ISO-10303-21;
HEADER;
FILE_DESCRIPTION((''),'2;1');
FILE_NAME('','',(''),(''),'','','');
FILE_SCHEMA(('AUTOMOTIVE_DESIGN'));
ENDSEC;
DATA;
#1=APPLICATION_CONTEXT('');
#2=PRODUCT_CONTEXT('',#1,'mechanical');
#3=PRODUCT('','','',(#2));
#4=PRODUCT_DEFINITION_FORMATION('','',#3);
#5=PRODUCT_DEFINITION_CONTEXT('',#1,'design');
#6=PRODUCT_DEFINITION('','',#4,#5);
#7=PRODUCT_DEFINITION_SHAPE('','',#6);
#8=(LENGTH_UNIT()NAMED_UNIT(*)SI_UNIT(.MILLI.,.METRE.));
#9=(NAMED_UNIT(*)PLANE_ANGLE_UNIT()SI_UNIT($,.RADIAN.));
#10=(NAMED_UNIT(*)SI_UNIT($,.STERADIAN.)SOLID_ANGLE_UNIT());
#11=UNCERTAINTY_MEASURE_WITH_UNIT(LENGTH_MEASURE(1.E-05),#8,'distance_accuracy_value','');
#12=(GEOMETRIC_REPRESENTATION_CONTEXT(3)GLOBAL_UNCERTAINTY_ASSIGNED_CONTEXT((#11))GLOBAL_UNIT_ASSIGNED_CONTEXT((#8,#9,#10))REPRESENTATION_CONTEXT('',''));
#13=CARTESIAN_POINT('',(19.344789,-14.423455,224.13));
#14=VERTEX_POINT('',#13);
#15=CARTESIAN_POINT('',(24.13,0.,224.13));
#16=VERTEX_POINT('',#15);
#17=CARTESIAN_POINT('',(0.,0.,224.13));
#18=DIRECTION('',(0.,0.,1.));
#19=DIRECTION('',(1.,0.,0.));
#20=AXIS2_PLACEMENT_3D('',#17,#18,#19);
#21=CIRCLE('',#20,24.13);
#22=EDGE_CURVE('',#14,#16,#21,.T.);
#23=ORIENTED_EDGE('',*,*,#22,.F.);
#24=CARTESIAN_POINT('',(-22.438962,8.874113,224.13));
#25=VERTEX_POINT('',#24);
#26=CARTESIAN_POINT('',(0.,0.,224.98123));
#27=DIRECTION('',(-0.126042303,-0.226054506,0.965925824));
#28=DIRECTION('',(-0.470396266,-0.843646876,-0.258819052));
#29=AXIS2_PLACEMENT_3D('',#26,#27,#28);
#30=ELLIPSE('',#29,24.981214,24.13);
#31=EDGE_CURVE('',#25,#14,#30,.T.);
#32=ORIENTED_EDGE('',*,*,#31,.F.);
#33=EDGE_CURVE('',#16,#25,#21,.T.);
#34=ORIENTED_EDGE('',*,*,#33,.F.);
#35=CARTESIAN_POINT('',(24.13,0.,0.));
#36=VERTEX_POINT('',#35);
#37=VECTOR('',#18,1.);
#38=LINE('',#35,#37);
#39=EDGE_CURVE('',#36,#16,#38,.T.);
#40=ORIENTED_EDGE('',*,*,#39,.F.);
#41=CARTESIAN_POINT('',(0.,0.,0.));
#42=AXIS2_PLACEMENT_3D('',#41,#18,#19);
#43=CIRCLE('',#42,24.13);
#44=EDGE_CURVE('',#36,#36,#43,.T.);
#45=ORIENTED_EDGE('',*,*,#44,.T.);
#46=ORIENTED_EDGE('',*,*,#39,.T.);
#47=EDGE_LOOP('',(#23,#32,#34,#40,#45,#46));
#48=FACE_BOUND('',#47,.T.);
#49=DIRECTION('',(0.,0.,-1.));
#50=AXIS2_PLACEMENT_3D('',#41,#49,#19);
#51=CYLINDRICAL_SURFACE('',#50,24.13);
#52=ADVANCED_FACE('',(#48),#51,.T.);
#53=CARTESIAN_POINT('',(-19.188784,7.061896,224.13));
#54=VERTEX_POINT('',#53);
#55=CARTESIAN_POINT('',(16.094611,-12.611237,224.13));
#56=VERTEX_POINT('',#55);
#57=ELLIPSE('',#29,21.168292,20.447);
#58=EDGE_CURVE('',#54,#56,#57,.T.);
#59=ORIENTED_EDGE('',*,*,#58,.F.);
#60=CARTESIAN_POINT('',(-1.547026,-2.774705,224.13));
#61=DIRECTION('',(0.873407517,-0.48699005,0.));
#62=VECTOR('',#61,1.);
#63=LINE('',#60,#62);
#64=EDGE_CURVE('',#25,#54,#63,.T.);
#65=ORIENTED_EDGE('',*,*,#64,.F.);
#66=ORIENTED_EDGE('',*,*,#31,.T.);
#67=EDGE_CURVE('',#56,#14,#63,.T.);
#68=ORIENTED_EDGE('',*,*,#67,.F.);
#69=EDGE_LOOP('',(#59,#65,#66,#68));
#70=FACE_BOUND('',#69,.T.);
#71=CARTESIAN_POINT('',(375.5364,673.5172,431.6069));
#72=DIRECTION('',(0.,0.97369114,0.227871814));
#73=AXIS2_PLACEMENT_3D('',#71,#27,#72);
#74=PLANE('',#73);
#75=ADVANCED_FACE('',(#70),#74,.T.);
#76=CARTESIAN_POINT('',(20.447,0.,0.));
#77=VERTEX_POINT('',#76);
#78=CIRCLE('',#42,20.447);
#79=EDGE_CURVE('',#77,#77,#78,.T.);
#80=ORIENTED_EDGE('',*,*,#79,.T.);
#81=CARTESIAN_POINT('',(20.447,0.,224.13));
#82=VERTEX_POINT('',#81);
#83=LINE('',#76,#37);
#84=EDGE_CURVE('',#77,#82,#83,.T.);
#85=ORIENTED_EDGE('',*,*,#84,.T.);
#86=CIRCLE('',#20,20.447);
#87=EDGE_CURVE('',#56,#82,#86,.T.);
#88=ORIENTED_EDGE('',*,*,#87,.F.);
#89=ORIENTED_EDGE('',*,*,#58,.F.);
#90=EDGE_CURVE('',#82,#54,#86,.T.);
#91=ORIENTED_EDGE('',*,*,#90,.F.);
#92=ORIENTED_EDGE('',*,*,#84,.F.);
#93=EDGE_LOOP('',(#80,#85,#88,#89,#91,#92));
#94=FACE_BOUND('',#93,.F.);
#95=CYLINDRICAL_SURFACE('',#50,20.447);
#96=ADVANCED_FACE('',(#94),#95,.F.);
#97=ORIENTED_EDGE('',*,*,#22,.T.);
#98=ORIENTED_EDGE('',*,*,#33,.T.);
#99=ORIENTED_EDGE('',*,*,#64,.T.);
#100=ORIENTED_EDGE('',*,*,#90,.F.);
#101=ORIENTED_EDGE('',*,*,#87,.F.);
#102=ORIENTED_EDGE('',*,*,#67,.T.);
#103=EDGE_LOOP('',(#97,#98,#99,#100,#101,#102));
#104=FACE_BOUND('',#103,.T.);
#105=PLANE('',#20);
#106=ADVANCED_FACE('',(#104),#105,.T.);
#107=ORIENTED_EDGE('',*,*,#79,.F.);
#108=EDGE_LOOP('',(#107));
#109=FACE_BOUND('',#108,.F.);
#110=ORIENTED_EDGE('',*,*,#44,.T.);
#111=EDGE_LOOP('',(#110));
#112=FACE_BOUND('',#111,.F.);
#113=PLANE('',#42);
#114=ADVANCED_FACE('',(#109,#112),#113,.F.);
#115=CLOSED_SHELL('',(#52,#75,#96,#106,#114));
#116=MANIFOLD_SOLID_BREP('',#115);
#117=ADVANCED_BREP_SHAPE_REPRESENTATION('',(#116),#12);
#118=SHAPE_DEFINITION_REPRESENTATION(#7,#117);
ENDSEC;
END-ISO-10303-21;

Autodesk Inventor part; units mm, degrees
ref_plane "Start Plane" through (0, 0, 0) normal (0, 0, 1) x (1, 0, 0)
ref_plane "End Plane" through (0, 0, 224.13) normal (0, 0, 1) x (1, 0, 0)
sketch "Sketch" plane through (0, 0, 0) normal (0, 0, 1) x (1, 0, 0)
  circle A0 centre (0, 0) radius 20.447
  circle A1 centre (0, 0) radius 24.13
  dimension "d0" = 48.26
  dimension "d1" = 3.683
extrude "Body" add sketch "Sketch" along normal up to surface (224.13 mm away) from surface at 0
sketch "Sketch3" plane through (0, 0, 0) normal (0, 0, 1) x (1, 0, 0)
  line L0 (0, 0) -> (10, 0)
ref_plane "Work Plane3" through (0, 0, 0) normal (0, -1, 0) x (1, 0, 0)
ref_plane "Work Plane4" through (375.5364, 673.5172, 431.6069) normal (-0.1260423, -0.2260545, 0.9659258) x (0.991919, -0.0144931, 0.1260423)
split "Split1" plane through (375.5364, 673.5172, 431.6069) removes the side toward (-0.1260423, -0.2260545, 0.9659258)
ref_plane "Work Plane5" through (-1746.8149, 973.9804, 224.13) normal (0, 0, 1) x (1, 0, 0)
split "Split2" plane through (-1746.8149, 973.9804, 224.13) removes the side toward (0, 0, 1)
sketch "Sketch4" plane through (0, 0, 0) normal (0, -1, 0) x (1, 0, 0)
  line L0 (-2, 0) -> (12, 0) projected
  line L1 (-2, 224.13) -> (12, 224.13) projected
  dimension "d7" = 224.13
equation "\"d0\" = G_H"
equation "\"d1\" = G_T"
equation "\"d2\" = G_L"
equation "\"G_H\" = 48.26"
equation "\"G_T\" = 3.683"
equation "\"G_L\" = d7"
equation "\"G_OFFSET_START\" = 0"
equation "\"G_OFFSET_END\" = 24.13"
equation "\"d5\" = G_OFFSET_END + B_L"
equation "\"B_L\" = 200"
properties part number "ANSI - 1 1/2 x 0.145 - 8.824" material "Steel, Mild"
